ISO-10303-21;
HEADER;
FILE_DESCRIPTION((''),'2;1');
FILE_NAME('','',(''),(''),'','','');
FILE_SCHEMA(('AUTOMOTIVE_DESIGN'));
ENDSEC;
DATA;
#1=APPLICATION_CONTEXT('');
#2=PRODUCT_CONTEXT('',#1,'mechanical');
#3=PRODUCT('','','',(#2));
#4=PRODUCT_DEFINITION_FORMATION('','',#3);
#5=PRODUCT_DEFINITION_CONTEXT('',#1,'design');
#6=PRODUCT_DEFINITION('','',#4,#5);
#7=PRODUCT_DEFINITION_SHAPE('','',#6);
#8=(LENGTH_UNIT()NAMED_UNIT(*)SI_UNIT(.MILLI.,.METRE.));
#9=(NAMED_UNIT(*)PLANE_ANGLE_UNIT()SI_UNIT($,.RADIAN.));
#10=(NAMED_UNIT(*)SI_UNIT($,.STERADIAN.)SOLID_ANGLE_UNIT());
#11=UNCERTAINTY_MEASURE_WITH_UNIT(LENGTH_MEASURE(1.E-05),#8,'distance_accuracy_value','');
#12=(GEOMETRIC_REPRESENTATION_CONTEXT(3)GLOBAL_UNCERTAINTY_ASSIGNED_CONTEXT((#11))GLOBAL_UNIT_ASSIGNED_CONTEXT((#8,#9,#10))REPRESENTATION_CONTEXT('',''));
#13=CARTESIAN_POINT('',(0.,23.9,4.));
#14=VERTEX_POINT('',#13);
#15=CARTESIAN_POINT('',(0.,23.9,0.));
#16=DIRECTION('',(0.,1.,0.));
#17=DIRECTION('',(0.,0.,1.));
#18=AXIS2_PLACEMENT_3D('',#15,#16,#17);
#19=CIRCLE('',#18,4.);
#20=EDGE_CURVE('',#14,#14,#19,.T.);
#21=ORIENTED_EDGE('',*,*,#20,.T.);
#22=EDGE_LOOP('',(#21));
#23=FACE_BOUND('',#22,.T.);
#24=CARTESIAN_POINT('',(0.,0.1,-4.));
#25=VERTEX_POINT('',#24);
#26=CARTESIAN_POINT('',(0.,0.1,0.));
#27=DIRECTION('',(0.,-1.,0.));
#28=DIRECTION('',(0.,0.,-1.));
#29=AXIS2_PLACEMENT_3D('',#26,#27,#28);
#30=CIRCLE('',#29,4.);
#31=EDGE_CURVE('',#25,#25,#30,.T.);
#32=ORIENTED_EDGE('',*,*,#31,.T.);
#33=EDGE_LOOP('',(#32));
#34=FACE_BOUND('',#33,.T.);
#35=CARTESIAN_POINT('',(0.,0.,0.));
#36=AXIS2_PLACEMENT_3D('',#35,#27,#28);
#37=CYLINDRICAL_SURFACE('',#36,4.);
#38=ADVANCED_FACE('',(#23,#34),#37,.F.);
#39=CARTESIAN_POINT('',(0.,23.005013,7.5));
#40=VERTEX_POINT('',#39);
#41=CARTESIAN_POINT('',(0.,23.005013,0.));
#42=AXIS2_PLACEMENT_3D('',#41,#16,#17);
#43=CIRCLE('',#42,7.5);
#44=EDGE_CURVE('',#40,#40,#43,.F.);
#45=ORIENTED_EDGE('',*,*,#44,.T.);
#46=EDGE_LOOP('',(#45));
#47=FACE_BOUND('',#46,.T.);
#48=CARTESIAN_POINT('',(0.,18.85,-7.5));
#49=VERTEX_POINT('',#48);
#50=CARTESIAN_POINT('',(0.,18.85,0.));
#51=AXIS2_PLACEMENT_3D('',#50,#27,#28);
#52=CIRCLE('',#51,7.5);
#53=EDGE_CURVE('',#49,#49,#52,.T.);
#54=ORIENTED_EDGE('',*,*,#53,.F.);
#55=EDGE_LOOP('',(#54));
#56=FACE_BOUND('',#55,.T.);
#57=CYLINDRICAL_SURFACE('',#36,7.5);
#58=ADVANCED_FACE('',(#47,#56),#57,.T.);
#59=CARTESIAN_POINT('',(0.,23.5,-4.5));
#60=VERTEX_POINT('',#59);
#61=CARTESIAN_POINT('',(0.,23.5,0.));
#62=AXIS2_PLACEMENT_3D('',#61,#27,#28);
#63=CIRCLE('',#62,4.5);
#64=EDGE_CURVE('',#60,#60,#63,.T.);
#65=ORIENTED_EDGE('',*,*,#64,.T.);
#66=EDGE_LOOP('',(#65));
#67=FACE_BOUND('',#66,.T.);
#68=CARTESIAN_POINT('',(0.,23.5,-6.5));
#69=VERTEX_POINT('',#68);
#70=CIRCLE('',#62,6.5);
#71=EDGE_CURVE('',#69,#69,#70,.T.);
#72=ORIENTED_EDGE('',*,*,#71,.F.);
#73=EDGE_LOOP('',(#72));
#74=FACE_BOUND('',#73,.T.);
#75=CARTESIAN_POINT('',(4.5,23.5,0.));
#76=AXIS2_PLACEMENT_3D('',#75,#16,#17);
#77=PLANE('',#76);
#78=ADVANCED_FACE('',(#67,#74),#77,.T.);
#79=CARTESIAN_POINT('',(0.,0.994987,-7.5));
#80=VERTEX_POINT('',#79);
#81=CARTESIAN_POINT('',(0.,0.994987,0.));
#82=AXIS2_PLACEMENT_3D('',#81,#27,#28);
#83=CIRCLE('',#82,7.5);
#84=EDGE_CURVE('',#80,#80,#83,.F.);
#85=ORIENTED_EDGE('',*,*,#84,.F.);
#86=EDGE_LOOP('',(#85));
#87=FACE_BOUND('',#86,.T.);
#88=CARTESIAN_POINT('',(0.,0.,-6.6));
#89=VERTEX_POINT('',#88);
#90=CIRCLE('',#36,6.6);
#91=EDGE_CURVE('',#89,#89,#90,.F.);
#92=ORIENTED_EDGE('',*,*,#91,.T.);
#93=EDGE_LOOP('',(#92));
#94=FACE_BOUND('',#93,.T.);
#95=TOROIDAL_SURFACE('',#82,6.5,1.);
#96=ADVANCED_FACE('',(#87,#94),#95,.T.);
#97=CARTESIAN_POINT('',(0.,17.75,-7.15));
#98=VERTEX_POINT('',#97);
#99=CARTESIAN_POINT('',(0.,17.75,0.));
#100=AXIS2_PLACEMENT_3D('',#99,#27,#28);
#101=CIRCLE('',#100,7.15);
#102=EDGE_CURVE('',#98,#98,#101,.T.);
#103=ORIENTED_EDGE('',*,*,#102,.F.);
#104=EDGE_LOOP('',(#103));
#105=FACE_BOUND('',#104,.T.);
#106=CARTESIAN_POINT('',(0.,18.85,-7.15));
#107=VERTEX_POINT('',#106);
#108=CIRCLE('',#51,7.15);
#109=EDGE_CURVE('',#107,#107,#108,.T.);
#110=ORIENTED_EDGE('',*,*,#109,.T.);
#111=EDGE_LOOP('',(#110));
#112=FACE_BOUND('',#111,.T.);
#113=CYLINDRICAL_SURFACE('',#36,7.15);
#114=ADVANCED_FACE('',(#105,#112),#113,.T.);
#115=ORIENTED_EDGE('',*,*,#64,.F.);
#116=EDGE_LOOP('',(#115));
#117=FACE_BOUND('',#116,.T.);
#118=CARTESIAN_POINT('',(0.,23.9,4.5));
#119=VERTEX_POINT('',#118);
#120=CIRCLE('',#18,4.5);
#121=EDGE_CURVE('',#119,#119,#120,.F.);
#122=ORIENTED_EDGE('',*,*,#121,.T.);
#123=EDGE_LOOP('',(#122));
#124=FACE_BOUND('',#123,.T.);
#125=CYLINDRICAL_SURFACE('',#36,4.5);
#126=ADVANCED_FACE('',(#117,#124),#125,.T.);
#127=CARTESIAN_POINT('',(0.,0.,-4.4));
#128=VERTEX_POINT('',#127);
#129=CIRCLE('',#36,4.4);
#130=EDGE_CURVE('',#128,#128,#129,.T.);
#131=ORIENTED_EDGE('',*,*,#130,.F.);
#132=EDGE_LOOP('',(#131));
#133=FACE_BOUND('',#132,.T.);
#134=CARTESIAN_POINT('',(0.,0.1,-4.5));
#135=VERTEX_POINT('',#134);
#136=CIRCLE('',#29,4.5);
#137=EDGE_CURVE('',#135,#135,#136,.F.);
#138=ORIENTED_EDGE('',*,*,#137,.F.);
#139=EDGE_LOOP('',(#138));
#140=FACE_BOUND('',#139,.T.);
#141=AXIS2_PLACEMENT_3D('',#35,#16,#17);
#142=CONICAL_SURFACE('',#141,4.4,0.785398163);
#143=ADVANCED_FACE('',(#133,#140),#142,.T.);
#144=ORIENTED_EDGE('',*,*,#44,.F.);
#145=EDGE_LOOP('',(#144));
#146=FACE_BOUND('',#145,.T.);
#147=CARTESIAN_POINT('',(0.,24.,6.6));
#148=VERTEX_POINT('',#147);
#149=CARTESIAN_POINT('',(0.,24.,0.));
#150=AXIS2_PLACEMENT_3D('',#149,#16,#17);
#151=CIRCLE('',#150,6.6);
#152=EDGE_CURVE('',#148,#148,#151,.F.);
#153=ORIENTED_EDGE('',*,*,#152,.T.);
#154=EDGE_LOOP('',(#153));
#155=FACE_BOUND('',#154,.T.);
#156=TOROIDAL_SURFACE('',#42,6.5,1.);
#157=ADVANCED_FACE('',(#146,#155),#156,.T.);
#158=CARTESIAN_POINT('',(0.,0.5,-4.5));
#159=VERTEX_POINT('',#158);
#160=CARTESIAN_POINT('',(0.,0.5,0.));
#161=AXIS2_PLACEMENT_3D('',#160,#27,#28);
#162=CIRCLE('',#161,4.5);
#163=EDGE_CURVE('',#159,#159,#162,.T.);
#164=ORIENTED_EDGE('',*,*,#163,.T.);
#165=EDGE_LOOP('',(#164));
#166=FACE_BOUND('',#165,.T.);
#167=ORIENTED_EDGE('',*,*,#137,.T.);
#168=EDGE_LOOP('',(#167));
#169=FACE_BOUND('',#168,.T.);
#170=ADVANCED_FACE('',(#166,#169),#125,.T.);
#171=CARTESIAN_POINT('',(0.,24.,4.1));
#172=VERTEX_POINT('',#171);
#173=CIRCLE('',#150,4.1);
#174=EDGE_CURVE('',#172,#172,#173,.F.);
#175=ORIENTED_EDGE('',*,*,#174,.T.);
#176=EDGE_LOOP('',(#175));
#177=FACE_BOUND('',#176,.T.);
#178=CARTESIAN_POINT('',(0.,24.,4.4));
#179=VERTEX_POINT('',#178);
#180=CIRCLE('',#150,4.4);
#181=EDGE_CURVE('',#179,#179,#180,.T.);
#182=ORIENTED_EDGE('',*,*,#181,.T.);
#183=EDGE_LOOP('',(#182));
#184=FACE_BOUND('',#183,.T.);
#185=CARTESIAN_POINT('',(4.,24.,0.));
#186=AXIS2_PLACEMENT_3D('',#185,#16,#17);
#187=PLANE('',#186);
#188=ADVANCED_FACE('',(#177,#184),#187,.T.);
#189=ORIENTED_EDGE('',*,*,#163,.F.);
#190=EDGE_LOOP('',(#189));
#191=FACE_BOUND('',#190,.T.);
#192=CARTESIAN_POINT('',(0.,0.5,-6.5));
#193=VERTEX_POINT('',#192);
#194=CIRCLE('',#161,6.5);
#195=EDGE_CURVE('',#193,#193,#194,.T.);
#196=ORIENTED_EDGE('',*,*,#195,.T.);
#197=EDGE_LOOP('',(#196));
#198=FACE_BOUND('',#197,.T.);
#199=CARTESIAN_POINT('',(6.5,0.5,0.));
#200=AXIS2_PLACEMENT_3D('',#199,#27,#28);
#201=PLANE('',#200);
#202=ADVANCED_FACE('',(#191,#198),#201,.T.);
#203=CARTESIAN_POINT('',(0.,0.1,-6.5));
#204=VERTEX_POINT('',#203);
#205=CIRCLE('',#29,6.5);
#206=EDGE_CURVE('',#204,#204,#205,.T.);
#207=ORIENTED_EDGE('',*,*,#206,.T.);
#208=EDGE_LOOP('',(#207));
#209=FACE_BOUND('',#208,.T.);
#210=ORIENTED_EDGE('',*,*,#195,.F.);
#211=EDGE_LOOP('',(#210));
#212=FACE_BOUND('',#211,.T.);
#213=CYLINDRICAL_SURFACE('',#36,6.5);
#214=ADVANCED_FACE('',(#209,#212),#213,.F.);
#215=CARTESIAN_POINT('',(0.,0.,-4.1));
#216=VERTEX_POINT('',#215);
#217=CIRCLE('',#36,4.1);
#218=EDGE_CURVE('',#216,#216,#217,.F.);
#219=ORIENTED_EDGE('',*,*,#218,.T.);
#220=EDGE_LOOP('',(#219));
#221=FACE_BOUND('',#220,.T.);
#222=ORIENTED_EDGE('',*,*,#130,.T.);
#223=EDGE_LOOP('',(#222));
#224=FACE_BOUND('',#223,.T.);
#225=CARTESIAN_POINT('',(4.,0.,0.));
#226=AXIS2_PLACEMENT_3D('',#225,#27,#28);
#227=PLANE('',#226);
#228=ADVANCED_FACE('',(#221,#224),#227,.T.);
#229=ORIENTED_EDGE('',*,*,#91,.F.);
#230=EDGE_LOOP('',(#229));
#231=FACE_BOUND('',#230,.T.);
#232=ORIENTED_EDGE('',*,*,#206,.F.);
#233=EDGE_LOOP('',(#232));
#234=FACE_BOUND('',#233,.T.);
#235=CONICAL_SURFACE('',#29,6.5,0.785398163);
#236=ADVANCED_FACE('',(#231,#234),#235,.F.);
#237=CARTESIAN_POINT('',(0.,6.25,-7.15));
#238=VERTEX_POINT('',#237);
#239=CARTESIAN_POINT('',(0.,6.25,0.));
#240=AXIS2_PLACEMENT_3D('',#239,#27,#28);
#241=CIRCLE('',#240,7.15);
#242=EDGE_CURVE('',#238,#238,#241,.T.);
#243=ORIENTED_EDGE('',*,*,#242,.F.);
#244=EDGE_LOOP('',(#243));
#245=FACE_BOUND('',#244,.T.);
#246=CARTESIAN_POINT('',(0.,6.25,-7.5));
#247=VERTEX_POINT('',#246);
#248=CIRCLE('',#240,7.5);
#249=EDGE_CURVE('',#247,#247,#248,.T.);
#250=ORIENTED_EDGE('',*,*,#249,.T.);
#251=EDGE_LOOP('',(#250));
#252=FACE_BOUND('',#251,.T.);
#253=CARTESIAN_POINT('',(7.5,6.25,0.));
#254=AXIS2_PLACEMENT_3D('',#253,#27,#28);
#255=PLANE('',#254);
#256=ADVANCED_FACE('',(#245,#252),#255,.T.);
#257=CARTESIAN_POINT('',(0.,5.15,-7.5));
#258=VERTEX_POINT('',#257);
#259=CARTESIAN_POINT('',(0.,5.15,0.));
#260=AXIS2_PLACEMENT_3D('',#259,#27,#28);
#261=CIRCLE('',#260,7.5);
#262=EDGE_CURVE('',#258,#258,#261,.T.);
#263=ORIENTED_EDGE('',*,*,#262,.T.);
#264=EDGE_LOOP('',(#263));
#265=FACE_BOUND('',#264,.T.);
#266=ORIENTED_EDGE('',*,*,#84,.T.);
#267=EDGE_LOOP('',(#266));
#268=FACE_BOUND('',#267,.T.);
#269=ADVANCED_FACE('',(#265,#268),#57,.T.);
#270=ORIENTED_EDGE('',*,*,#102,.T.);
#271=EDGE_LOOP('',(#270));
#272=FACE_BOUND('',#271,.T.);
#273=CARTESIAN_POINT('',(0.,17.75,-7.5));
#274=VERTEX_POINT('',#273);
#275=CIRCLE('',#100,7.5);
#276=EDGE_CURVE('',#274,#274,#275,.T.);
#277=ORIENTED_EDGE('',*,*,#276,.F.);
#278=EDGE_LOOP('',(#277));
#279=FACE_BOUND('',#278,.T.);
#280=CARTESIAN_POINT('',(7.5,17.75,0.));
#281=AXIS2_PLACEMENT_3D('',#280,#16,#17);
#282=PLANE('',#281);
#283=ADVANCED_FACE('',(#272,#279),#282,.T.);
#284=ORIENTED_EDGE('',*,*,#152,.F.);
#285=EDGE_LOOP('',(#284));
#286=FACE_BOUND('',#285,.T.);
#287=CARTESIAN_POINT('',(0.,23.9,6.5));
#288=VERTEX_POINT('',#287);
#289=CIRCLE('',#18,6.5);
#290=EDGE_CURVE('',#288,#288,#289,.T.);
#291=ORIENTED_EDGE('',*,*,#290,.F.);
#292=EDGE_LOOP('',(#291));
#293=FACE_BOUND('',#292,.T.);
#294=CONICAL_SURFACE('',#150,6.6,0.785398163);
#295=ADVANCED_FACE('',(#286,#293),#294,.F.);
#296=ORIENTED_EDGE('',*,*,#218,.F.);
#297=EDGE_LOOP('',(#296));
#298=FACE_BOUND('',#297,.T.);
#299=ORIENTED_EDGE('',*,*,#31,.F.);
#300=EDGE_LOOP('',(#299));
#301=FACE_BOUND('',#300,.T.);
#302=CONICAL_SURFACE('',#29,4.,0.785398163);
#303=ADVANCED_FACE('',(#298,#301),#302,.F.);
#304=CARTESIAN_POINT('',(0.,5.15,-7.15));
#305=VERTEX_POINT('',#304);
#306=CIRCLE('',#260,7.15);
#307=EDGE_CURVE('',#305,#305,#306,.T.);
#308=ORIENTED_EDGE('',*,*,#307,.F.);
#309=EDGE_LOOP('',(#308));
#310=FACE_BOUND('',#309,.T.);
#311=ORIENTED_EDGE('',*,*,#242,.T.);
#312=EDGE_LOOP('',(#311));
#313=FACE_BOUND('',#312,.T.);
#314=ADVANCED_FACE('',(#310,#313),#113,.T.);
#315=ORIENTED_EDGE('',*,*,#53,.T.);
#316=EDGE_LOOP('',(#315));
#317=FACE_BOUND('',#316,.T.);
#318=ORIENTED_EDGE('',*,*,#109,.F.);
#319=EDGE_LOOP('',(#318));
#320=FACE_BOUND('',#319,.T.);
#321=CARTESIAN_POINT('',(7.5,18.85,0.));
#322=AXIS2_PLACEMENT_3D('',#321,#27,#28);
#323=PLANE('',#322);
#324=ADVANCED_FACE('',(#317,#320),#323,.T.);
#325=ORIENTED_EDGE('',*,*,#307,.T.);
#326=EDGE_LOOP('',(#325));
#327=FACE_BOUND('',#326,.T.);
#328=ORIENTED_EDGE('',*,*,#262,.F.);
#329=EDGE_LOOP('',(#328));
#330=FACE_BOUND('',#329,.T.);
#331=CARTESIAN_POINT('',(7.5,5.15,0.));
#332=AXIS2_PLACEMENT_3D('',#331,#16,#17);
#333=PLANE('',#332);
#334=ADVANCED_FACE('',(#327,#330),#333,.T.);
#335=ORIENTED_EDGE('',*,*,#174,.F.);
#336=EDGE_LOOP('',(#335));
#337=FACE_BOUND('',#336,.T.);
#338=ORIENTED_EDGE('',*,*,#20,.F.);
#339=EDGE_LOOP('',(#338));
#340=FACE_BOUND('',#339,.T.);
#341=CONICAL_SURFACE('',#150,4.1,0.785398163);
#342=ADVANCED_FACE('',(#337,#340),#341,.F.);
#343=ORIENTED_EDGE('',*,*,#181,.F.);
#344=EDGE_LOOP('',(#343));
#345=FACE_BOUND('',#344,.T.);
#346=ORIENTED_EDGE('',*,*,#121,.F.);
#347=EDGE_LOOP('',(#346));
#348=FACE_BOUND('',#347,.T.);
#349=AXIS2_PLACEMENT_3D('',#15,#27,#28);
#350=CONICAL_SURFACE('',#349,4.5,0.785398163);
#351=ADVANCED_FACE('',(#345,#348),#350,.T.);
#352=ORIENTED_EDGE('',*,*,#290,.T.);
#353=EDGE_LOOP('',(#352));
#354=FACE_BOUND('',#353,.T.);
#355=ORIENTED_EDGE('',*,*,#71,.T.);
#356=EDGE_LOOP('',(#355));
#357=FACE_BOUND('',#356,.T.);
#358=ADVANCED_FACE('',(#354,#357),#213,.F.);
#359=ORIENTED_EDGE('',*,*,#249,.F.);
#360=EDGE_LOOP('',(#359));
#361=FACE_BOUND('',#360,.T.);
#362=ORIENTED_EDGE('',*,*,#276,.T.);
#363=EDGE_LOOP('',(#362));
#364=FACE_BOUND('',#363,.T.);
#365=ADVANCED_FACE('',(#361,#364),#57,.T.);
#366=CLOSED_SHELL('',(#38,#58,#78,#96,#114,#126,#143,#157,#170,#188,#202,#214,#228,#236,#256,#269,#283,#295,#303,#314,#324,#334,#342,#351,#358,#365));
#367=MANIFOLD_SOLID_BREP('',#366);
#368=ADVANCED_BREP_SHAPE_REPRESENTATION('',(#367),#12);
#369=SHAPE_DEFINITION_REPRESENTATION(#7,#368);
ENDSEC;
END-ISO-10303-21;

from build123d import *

# Parameters (mm, degrees)
CHAMFER1_SIZE = 0.1
FILLET1_R     = 1


with BuildPart() as part:
    # Sketch1 → Revolve1 (revolve)
    with BuildSketch(Plane.XY, mode=Mode.PRIVATE) as revolve1_sk:
        Polygon((4, 0), (4.5, 0), (4.5, 0.5), (6.5, 0.5), (6.5, 0), (7.5, 0), (7.5, 5.15), (7.15, 5.15), (7.15, 6.25), (7.5, 6.25), (7.5, 17.75), (7.15, 17.75), (7.15, 18.85), (7.5, 18.85), (7.5, 24), (6.5, 24), (6.5, 23.5), (4.5, 23.5), (4.5, 24), (4, 24), align=None)
    revolve(revolve1_sk.sketch.rotate(Axis((0, 0, 0), (0, 1, 0)), 90), axis=Axis((0, 0, 0), (0, 1, 0)))

    # Chamfer1
    chamfer1_edges = [part.edges().sort_by_distance(p)[0] for p in [
        (0, 0, 4),
        (0, 0, 4.5),
        (0, 0, 6.5),
        (0, 24, 6.5),
        (0, 24, 4.5),
        (0, 24, 4),
    ]]
    chamfer(chamfer1_edges, length=CHAMFER1_SIZE)

    # Fillet1
    # the kernel refuses this fillet: 1 mm, written as the material it takes off along each edge
    with BuildSketch(Plane(origin=(0, 0, 0), x_dir=(0, 0, -1), z_dir=(1, 0, 0))) as fillet1_piece_1:
        with BuildLine():
            CenterArc((6.5, 0.994987437), FILLET1_R, 275.739170477, 84.260829523)
            Line((7.5, 0.994987437), (7.52, 0.994987437))
            Line((7.52, 0.994987437), (7.52, 0))
            Line((7.52, 0), (7.5, -0.02))
            ThreePointArc((7.5, -0.02), (7.05, -0.02), (6.602, -0.019899749))
            Line((6.602, -0.019899749), (6.6, 0))
        make_face()
    revolve(axis=Axis((0, 0, 0), (0, 1, 0)), mode=Mode.SUBTRACT)
    with BuildSketch(Plane(origin=(0, 24, 0), x_dir=(0, 0, -1), z_dir=(1, 0, 0))) as fillet1_piece_2:
        with BuildLine():
            CenterArc((6.5, -0.994987437), FILLET1_R, 0, 84.260829523)
            Line((7.5, -0.994987437), (7.52, -0.994987437))
            Line((7.52, -0.994987437), (7.52, 0))
            Line((7.52, 0), (7.5, 0.02))
            ThreePointArc((7.5, 0.02), (7.05, 0.02), (6.602, 0.019899749))
            Line((6.602, 0.019899749), (6.6, 0))
        make_face()
    revolve(axis=Axis((0, 24, 0), (0, 1, 0)), mode=Mode.SUBTRACT)


solid = part.part
